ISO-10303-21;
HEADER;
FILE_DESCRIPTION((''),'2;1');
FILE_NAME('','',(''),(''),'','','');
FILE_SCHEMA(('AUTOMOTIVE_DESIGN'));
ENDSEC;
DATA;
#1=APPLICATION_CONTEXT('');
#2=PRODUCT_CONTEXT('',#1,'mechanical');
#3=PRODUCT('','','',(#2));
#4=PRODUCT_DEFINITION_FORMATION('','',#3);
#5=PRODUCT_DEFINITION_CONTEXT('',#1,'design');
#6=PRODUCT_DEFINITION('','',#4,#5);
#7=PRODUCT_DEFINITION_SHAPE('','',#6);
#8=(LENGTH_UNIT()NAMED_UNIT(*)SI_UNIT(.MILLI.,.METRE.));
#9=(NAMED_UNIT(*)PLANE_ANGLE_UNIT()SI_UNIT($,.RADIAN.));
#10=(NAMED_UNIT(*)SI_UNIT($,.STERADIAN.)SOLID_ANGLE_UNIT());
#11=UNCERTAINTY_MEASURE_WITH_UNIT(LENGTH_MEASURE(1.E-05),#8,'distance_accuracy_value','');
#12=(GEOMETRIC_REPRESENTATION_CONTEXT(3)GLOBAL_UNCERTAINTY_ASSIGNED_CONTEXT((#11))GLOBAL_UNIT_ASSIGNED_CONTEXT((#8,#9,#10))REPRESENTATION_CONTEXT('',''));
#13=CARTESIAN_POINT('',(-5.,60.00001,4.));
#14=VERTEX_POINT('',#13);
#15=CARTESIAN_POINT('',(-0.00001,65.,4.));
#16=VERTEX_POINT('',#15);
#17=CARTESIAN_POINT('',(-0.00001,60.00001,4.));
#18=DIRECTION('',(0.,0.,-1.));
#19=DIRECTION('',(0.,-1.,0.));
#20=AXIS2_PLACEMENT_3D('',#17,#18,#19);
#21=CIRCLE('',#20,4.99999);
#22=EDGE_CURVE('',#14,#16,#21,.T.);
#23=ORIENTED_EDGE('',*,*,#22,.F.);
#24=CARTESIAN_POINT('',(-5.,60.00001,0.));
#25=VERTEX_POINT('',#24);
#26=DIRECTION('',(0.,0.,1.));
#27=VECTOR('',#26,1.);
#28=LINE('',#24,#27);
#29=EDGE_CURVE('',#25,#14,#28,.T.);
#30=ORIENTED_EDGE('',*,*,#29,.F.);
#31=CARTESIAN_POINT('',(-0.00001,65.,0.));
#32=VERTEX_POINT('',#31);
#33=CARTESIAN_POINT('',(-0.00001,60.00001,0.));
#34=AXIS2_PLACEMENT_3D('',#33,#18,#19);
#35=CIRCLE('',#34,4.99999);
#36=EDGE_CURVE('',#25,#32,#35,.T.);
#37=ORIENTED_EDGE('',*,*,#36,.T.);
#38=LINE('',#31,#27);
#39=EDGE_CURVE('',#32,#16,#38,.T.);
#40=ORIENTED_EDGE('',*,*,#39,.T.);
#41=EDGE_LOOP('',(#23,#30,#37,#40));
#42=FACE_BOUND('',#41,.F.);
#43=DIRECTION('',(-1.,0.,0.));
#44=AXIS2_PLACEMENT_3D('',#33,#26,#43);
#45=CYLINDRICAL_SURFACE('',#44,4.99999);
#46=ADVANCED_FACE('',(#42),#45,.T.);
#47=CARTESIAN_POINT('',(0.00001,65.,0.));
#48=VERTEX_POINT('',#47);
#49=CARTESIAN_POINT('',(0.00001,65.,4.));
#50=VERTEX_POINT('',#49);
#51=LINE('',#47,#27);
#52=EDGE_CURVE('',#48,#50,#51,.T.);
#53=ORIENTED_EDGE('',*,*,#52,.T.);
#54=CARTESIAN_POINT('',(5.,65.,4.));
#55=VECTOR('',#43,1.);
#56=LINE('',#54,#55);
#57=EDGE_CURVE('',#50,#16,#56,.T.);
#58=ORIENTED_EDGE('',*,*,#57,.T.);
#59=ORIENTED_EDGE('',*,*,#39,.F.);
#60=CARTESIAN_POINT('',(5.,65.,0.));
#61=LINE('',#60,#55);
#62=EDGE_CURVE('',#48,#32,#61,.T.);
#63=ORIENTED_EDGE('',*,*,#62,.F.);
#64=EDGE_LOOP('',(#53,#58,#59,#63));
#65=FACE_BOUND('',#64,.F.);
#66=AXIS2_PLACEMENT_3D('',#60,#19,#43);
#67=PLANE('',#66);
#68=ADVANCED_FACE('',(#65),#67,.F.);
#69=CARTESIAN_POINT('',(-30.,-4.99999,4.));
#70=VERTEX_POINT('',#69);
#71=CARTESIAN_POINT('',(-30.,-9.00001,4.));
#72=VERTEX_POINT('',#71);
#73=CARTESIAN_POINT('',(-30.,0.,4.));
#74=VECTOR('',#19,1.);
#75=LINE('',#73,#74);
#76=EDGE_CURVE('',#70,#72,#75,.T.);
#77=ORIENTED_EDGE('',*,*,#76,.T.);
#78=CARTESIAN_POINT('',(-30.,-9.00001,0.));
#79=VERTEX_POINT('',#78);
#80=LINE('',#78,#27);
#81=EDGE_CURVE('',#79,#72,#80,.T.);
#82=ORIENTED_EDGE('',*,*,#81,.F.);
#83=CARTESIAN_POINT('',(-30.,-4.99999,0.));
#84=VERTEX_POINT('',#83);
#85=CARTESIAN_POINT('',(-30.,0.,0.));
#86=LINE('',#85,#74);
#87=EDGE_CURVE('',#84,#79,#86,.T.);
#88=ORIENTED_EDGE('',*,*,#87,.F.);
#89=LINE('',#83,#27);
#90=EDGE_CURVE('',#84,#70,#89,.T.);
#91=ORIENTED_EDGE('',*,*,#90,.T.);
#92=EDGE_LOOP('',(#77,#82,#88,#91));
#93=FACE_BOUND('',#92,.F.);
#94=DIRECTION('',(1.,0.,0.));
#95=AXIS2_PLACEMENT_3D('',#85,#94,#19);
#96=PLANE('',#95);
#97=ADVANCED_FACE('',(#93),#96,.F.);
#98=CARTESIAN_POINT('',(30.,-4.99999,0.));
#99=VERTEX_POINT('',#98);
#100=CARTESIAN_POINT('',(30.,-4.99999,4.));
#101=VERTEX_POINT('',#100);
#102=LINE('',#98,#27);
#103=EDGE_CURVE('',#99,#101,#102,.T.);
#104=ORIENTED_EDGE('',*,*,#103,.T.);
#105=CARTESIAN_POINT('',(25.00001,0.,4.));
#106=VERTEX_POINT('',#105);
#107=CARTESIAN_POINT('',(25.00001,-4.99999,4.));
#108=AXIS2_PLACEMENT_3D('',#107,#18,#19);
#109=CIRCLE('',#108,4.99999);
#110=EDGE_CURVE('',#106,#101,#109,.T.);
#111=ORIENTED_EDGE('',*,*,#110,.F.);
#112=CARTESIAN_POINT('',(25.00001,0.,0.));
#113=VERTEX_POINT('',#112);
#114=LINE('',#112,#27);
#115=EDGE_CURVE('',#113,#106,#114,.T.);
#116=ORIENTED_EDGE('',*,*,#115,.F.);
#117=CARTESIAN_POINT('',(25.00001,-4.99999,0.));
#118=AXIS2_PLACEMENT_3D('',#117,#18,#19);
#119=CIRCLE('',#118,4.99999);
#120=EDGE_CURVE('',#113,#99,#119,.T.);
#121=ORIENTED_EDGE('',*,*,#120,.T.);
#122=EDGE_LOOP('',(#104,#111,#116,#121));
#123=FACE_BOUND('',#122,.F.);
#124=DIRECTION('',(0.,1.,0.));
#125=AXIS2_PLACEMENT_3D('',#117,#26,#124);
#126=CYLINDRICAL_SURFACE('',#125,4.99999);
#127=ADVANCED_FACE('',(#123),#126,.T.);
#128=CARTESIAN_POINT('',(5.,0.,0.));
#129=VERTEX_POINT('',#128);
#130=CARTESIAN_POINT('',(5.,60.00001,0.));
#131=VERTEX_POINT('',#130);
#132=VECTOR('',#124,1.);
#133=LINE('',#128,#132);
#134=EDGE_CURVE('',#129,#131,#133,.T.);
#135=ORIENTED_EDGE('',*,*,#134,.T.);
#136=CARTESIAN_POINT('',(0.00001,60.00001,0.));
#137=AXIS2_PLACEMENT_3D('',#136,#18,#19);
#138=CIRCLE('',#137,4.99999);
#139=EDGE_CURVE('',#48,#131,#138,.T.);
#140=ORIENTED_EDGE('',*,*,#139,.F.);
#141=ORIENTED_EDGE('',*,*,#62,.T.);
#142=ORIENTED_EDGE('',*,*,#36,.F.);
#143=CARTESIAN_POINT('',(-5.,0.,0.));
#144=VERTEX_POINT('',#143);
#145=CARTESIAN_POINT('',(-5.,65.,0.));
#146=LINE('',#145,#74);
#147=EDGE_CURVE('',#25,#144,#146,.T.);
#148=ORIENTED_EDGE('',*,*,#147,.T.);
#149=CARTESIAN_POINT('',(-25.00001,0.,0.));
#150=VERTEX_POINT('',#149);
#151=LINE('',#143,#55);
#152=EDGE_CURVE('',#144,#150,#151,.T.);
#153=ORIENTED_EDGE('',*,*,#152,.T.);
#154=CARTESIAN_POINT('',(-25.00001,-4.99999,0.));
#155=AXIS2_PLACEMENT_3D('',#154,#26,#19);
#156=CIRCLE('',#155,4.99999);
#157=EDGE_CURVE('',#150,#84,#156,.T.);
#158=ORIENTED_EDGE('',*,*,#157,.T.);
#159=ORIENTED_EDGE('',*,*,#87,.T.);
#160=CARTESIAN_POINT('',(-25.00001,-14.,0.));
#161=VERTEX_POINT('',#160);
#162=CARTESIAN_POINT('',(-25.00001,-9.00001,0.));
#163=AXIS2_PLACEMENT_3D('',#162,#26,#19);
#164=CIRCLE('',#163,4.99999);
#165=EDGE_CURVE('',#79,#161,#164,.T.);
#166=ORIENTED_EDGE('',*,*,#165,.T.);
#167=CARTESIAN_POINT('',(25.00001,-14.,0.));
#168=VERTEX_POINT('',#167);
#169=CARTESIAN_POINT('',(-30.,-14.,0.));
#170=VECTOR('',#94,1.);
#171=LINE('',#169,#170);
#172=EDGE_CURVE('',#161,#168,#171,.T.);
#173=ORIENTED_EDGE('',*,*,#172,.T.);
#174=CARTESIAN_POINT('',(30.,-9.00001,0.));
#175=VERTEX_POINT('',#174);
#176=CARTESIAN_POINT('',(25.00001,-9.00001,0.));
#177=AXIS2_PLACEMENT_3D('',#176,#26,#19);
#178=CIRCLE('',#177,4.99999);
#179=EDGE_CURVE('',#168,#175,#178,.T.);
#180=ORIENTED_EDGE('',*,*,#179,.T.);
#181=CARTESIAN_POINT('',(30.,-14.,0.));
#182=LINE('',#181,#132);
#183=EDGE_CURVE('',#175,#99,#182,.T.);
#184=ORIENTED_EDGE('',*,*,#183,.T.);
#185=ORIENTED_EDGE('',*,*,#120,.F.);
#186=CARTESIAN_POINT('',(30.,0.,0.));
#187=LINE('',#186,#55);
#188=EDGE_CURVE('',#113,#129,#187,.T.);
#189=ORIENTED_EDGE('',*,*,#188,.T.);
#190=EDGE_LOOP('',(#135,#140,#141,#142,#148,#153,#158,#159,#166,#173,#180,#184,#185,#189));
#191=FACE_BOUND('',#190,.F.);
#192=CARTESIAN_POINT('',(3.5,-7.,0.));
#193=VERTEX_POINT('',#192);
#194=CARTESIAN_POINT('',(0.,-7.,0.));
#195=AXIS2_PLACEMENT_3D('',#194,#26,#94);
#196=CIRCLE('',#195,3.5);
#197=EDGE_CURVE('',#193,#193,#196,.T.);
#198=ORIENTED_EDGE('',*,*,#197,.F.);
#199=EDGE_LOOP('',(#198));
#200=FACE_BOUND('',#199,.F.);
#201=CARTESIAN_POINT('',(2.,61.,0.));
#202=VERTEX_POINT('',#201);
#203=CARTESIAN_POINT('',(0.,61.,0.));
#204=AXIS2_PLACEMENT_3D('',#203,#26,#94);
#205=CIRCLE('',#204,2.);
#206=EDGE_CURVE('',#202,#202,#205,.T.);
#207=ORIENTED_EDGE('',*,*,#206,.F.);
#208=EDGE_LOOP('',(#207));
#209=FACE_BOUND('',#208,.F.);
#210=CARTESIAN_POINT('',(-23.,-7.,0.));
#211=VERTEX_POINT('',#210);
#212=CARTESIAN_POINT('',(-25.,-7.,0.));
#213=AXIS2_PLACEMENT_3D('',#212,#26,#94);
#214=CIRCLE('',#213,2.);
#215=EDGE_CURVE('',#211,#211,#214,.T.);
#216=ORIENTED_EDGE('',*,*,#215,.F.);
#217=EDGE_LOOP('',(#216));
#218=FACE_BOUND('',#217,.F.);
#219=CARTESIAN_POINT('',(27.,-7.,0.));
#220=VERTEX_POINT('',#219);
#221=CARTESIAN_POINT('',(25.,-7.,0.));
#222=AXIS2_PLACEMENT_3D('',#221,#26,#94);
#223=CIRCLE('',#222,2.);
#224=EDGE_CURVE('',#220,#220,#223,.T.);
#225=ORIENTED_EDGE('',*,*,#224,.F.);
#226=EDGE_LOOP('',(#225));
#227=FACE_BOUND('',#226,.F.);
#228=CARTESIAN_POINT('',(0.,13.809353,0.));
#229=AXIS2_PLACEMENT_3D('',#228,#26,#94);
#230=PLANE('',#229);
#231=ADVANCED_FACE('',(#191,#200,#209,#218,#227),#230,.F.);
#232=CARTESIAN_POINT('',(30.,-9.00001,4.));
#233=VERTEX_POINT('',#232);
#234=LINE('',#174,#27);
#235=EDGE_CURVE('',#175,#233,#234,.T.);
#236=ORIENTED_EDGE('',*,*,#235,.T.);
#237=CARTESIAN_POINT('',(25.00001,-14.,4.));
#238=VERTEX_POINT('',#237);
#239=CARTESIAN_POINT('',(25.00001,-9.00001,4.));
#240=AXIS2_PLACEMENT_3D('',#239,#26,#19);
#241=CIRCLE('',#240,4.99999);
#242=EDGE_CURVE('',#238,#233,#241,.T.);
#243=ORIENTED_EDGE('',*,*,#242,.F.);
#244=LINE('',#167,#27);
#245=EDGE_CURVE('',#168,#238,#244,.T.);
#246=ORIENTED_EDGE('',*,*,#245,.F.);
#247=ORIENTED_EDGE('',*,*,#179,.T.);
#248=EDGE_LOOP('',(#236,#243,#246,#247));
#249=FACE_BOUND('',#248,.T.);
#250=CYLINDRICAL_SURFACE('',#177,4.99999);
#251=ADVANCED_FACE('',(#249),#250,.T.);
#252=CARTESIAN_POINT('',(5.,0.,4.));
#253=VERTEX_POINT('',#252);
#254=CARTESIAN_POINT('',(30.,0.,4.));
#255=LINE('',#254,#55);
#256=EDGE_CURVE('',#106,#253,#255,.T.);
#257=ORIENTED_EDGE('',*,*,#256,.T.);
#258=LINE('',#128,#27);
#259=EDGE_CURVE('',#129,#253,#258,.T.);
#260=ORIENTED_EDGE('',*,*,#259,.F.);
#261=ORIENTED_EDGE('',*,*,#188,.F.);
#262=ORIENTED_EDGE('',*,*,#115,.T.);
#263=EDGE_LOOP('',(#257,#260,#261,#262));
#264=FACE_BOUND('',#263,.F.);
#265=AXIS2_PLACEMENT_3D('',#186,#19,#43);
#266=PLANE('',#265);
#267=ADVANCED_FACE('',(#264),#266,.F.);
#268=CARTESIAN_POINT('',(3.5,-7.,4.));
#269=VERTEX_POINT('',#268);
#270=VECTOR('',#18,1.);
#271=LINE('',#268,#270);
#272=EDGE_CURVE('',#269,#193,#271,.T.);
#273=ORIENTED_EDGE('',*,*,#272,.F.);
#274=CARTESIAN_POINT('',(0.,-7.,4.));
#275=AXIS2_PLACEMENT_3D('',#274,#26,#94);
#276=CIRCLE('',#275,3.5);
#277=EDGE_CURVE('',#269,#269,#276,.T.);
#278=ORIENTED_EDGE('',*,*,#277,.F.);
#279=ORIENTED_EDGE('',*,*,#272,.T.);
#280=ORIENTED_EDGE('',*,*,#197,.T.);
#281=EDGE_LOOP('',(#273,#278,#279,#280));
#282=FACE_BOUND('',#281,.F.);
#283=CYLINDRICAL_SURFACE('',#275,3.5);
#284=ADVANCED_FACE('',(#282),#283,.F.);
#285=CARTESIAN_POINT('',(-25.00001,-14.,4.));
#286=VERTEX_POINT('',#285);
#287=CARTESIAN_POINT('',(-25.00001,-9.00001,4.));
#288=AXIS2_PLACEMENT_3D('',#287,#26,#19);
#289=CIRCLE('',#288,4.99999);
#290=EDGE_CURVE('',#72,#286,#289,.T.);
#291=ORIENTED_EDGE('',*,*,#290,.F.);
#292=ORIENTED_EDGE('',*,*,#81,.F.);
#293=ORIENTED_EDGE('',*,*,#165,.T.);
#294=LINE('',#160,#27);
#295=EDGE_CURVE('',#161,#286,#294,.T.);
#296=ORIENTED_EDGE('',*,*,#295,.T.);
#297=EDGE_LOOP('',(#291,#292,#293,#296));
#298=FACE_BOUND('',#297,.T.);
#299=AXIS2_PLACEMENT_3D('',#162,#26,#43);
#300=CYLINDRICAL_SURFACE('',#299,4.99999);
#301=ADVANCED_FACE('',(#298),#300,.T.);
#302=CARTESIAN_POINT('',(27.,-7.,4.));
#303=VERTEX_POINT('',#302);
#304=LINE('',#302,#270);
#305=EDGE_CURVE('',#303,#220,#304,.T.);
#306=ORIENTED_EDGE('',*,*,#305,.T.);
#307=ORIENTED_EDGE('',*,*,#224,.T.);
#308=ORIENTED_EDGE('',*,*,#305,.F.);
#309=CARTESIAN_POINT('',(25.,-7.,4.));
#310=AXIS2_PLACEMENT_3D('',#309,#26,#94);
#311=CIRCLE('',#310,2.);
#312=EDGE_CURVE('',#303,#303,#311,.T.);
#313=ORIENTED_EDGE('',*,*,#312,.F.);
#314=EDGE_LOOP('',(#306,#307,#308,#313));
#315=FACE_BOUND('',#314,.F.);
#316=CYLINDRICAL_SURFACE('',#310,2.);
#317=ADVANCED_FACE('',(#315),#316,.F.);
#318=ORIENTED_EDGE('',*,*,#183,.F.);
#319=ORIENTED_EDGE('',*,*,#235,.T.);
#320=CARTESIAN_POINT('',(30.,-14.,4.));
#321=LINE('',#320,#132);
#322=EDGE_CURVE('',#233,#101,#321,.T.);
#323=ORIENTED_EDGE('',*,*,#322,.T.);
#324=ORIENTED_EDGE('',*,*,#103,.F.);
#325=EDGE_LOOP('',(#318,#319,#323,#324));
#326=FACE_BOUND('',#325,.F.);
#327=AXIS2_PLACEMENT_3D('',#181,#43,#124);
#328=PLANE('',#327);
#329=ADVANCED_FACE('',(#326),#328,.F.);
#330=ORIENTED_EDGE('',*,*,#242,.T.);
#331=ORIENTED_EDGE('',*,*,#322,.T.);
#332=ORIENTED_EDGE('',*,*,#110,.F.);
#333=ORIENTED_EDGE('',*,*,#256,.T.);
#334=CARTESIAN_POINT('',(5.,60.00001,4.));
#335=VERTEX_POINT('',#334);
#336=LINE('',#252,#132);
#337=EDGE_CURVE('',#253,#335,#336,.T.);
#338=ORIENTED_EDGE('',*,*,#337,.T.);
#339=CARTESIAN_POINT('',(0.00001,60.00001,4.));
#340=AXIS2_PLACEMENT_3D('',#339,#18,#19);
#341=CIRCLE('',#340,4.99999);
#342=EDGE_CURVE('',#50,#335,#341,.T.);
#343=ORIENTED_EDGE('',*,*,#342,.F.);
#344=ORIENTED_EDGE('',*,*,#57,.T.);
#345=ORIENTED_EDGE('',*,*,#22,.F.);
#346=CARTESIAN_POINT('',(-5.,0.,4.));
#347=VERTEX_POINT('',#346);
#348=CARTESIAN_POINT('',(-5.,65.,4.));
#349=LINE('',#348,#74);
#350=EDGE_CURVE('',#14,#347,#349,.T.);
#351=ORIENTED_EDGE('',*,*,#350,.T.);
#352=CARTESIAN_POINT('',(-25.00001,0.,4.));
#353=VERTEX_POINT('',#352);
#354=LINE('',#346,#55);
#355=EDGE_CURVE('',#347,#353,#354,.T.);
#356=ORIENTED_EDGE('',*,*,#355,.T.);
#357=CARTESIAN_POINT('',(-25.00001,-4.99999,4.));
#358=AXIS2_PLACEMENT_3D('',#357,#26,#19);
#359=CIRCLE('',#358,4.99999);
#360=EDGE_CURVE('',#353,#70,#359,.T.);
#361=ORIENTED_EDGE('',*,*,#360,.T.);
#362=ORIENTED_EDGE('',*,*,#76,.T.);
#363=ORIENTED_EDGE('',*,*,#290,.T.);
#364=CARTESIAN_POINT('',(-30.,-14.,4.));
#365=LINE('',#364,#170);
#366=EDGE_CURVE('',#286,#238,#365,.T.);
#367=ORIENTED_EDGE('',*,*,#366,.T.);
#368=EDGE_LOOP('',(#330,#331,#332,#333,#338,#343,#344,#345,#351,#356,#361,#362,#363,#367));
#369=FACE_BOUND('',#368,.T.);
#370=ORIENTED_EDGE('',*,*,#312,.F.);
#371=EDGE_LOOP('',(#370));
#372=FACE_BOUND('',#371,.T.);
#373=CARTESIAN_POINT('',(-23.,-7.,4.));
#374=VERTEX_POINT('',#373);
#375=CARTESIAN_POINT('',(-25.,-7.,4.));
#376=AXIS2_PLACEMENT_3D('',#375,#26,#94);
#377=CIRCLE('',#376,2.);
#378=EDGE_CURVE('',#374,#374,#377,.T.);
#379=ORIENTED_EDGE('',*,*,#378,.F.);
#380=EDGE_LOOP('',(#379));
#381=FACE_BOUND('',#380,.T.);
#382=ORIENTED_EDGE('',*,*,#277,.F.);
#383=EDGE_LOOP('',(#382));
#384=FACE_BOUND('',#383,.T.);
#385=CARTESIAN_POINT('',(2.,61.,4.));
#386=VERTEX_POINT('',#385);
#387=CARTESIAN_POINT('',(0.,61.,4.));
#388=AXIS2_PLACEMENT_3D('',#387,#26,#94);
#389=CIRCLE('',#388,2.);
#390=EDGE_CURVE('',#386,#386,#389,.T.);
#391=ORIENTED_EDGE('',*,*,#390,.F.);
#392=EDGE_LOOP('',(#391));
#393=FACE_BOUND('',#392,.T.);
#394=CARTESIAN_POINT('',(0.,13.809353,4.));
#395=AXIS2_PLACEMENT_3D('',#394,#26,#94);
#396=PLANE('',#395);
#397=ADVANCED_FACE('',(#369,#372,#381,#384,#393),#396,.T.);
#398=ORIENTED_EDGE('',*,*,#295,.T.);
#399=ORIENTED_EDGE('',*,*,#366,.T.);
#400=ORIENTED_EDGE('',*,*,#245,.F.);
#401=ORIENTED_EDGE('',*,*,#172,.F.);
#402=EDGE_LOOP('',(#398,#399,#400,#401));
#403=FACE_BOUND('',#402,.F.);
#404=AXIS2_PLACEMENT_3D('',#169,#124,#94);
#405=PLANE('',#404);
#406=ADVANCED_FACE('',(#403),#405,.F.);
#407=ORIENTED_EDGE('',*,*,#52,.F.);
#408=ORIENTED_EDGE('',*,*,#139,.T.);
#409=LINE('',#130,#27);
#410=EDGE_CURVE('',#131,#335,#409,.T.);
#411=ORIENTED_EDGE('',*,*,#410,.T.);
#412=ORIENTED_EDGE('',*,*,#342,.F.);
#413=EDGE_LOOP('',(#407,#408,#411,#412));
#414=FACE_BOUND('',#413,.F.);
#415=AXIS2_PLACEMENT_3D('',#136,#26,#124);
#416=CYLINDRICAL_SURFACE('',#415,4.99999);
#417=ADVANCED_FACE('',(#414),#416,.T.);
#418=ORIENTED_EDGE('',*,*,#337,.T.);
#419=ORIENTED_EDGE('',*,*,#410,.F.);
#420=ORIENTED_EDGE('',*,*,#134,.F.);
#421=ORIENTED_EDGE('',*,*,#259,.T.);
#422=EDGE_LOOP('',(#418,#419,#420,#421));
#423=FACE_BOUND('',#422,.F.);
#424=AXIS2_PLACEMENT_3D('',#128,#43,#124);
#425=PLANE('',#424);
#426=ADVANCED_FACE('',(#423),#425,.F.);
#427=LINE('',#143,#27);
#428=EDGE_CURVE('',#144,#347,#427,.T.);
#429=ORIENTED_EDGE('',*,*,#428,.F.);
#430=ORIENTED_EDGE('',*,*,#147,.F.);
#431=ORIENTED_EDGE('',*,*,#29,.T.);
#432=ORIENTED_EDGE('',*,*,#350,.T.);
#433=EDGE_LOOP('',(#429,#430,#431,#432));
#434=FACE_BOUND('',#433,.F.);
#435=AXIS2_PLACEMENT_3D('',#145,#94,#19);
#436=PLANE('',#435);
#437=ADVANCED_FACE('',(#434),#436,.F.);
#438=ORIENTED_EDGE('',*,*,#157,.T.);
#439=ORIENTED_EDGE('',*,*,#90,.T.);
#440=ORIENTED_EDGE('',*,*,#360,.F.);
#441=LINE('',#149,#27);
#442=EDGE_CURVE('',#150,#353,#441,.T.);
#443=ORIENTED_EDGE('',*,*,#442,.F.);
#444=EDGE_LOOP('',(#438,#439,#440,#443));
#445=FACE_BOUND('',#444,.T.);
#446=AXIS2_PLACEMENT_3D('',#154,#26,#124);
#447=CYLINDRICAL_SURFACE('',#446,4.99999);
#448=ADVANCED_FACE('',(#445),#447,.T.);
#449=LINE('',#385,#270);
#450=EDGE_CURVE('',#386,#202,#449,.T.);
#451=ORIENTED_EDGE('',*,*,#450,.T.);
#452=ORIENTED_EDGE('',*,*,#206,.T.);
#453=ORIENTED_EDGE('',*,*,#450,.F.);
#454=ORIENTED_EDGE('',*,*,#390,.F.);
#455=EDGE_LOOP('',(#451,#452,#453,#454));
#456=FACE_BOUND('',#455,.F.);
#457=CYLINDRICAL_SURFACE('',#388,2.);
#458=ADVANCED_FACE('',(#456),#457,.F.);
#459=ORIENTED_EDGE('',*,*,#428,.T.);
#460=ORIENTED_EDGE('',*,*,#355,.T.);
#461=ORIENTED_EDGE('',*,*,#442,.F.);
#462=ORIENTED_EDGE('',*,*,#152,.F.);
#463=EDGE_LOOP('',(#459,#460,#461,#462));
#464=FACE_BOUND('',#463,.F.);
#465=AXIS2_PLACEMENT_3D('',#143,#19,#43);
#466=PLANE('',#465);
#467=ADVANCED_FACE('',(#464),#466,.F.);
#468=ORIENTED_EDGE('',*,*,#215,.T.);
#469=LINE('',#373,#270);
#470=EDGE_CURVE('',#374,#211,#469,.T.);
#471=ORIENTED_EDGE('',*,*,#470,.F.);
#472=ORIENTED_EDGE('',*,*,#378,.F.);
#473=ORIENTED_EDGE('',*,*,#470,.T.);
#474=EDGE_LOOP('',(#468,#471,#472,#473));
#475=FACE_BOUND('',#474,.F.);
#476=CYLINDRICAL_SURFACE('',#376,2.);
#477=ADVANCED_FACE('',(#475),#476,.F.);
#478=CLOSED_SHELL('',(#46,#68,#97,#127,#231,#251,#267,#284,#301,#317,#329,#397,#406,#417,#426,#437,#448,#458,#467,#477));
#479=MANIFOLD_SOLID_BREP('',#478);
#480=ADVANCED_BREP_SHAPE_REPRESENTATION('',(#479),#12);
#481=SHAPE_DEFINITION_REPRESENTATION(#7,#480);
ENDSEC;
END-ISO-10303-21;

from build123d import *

# Parameters (mm, degrees)
F1_DEPTH = 4
F2_R     = 2
F2_R_2   = 3.5
F3_DEPTH = 25
F4_R     = 4.99999


# Not quite as in the source:
# - a fillet or chamfer is up to 0.001 mm smaller than in the source, because OpenCascade refuses the exact size


with BuildPart() as f1:
    # F0 (on Top) → F1 (new body)
    with BuildSketch(Plane.XY):
        Polygon((-5, 65), (-5, 0), (-30, 0), (-30, -14), (30, -14), (30, 0), (5, 0), (5, 65), align=None)
    extrude(amount=F1_DEPTH)

    # F2 (on face) → F3 (cut)
    with BuildSketch(Plane.XY.offset(4)):
        with Locations((-25, -7)):
            Circle(F2_R)
        with Locations((25, -7)):
            Circle(F2_R)
        with Locations((0, -7)):
            Circle(F2_R_2)
        with Locations((0, 61)):
            Circle(F2_R)
    extrude(amount=-F3_DEPTH, mode=Mode.SUBTRACT)

    # F4 (radius 5 in the source; OpenCascade refuses exactly that, so slightly less here)
    f4_edges = [f1.edges().sort_by_distance(p)[0] for p in [
        (-30, -14, 2),
        (-30, 0, 2),
        (30, -14, 2),
        (30, 0, 2),
        (5, 65, 2),
        (-5, 65, 2),
    ]]
    fillet(f4_edges, radius=F4_R)


solid = f1.part
